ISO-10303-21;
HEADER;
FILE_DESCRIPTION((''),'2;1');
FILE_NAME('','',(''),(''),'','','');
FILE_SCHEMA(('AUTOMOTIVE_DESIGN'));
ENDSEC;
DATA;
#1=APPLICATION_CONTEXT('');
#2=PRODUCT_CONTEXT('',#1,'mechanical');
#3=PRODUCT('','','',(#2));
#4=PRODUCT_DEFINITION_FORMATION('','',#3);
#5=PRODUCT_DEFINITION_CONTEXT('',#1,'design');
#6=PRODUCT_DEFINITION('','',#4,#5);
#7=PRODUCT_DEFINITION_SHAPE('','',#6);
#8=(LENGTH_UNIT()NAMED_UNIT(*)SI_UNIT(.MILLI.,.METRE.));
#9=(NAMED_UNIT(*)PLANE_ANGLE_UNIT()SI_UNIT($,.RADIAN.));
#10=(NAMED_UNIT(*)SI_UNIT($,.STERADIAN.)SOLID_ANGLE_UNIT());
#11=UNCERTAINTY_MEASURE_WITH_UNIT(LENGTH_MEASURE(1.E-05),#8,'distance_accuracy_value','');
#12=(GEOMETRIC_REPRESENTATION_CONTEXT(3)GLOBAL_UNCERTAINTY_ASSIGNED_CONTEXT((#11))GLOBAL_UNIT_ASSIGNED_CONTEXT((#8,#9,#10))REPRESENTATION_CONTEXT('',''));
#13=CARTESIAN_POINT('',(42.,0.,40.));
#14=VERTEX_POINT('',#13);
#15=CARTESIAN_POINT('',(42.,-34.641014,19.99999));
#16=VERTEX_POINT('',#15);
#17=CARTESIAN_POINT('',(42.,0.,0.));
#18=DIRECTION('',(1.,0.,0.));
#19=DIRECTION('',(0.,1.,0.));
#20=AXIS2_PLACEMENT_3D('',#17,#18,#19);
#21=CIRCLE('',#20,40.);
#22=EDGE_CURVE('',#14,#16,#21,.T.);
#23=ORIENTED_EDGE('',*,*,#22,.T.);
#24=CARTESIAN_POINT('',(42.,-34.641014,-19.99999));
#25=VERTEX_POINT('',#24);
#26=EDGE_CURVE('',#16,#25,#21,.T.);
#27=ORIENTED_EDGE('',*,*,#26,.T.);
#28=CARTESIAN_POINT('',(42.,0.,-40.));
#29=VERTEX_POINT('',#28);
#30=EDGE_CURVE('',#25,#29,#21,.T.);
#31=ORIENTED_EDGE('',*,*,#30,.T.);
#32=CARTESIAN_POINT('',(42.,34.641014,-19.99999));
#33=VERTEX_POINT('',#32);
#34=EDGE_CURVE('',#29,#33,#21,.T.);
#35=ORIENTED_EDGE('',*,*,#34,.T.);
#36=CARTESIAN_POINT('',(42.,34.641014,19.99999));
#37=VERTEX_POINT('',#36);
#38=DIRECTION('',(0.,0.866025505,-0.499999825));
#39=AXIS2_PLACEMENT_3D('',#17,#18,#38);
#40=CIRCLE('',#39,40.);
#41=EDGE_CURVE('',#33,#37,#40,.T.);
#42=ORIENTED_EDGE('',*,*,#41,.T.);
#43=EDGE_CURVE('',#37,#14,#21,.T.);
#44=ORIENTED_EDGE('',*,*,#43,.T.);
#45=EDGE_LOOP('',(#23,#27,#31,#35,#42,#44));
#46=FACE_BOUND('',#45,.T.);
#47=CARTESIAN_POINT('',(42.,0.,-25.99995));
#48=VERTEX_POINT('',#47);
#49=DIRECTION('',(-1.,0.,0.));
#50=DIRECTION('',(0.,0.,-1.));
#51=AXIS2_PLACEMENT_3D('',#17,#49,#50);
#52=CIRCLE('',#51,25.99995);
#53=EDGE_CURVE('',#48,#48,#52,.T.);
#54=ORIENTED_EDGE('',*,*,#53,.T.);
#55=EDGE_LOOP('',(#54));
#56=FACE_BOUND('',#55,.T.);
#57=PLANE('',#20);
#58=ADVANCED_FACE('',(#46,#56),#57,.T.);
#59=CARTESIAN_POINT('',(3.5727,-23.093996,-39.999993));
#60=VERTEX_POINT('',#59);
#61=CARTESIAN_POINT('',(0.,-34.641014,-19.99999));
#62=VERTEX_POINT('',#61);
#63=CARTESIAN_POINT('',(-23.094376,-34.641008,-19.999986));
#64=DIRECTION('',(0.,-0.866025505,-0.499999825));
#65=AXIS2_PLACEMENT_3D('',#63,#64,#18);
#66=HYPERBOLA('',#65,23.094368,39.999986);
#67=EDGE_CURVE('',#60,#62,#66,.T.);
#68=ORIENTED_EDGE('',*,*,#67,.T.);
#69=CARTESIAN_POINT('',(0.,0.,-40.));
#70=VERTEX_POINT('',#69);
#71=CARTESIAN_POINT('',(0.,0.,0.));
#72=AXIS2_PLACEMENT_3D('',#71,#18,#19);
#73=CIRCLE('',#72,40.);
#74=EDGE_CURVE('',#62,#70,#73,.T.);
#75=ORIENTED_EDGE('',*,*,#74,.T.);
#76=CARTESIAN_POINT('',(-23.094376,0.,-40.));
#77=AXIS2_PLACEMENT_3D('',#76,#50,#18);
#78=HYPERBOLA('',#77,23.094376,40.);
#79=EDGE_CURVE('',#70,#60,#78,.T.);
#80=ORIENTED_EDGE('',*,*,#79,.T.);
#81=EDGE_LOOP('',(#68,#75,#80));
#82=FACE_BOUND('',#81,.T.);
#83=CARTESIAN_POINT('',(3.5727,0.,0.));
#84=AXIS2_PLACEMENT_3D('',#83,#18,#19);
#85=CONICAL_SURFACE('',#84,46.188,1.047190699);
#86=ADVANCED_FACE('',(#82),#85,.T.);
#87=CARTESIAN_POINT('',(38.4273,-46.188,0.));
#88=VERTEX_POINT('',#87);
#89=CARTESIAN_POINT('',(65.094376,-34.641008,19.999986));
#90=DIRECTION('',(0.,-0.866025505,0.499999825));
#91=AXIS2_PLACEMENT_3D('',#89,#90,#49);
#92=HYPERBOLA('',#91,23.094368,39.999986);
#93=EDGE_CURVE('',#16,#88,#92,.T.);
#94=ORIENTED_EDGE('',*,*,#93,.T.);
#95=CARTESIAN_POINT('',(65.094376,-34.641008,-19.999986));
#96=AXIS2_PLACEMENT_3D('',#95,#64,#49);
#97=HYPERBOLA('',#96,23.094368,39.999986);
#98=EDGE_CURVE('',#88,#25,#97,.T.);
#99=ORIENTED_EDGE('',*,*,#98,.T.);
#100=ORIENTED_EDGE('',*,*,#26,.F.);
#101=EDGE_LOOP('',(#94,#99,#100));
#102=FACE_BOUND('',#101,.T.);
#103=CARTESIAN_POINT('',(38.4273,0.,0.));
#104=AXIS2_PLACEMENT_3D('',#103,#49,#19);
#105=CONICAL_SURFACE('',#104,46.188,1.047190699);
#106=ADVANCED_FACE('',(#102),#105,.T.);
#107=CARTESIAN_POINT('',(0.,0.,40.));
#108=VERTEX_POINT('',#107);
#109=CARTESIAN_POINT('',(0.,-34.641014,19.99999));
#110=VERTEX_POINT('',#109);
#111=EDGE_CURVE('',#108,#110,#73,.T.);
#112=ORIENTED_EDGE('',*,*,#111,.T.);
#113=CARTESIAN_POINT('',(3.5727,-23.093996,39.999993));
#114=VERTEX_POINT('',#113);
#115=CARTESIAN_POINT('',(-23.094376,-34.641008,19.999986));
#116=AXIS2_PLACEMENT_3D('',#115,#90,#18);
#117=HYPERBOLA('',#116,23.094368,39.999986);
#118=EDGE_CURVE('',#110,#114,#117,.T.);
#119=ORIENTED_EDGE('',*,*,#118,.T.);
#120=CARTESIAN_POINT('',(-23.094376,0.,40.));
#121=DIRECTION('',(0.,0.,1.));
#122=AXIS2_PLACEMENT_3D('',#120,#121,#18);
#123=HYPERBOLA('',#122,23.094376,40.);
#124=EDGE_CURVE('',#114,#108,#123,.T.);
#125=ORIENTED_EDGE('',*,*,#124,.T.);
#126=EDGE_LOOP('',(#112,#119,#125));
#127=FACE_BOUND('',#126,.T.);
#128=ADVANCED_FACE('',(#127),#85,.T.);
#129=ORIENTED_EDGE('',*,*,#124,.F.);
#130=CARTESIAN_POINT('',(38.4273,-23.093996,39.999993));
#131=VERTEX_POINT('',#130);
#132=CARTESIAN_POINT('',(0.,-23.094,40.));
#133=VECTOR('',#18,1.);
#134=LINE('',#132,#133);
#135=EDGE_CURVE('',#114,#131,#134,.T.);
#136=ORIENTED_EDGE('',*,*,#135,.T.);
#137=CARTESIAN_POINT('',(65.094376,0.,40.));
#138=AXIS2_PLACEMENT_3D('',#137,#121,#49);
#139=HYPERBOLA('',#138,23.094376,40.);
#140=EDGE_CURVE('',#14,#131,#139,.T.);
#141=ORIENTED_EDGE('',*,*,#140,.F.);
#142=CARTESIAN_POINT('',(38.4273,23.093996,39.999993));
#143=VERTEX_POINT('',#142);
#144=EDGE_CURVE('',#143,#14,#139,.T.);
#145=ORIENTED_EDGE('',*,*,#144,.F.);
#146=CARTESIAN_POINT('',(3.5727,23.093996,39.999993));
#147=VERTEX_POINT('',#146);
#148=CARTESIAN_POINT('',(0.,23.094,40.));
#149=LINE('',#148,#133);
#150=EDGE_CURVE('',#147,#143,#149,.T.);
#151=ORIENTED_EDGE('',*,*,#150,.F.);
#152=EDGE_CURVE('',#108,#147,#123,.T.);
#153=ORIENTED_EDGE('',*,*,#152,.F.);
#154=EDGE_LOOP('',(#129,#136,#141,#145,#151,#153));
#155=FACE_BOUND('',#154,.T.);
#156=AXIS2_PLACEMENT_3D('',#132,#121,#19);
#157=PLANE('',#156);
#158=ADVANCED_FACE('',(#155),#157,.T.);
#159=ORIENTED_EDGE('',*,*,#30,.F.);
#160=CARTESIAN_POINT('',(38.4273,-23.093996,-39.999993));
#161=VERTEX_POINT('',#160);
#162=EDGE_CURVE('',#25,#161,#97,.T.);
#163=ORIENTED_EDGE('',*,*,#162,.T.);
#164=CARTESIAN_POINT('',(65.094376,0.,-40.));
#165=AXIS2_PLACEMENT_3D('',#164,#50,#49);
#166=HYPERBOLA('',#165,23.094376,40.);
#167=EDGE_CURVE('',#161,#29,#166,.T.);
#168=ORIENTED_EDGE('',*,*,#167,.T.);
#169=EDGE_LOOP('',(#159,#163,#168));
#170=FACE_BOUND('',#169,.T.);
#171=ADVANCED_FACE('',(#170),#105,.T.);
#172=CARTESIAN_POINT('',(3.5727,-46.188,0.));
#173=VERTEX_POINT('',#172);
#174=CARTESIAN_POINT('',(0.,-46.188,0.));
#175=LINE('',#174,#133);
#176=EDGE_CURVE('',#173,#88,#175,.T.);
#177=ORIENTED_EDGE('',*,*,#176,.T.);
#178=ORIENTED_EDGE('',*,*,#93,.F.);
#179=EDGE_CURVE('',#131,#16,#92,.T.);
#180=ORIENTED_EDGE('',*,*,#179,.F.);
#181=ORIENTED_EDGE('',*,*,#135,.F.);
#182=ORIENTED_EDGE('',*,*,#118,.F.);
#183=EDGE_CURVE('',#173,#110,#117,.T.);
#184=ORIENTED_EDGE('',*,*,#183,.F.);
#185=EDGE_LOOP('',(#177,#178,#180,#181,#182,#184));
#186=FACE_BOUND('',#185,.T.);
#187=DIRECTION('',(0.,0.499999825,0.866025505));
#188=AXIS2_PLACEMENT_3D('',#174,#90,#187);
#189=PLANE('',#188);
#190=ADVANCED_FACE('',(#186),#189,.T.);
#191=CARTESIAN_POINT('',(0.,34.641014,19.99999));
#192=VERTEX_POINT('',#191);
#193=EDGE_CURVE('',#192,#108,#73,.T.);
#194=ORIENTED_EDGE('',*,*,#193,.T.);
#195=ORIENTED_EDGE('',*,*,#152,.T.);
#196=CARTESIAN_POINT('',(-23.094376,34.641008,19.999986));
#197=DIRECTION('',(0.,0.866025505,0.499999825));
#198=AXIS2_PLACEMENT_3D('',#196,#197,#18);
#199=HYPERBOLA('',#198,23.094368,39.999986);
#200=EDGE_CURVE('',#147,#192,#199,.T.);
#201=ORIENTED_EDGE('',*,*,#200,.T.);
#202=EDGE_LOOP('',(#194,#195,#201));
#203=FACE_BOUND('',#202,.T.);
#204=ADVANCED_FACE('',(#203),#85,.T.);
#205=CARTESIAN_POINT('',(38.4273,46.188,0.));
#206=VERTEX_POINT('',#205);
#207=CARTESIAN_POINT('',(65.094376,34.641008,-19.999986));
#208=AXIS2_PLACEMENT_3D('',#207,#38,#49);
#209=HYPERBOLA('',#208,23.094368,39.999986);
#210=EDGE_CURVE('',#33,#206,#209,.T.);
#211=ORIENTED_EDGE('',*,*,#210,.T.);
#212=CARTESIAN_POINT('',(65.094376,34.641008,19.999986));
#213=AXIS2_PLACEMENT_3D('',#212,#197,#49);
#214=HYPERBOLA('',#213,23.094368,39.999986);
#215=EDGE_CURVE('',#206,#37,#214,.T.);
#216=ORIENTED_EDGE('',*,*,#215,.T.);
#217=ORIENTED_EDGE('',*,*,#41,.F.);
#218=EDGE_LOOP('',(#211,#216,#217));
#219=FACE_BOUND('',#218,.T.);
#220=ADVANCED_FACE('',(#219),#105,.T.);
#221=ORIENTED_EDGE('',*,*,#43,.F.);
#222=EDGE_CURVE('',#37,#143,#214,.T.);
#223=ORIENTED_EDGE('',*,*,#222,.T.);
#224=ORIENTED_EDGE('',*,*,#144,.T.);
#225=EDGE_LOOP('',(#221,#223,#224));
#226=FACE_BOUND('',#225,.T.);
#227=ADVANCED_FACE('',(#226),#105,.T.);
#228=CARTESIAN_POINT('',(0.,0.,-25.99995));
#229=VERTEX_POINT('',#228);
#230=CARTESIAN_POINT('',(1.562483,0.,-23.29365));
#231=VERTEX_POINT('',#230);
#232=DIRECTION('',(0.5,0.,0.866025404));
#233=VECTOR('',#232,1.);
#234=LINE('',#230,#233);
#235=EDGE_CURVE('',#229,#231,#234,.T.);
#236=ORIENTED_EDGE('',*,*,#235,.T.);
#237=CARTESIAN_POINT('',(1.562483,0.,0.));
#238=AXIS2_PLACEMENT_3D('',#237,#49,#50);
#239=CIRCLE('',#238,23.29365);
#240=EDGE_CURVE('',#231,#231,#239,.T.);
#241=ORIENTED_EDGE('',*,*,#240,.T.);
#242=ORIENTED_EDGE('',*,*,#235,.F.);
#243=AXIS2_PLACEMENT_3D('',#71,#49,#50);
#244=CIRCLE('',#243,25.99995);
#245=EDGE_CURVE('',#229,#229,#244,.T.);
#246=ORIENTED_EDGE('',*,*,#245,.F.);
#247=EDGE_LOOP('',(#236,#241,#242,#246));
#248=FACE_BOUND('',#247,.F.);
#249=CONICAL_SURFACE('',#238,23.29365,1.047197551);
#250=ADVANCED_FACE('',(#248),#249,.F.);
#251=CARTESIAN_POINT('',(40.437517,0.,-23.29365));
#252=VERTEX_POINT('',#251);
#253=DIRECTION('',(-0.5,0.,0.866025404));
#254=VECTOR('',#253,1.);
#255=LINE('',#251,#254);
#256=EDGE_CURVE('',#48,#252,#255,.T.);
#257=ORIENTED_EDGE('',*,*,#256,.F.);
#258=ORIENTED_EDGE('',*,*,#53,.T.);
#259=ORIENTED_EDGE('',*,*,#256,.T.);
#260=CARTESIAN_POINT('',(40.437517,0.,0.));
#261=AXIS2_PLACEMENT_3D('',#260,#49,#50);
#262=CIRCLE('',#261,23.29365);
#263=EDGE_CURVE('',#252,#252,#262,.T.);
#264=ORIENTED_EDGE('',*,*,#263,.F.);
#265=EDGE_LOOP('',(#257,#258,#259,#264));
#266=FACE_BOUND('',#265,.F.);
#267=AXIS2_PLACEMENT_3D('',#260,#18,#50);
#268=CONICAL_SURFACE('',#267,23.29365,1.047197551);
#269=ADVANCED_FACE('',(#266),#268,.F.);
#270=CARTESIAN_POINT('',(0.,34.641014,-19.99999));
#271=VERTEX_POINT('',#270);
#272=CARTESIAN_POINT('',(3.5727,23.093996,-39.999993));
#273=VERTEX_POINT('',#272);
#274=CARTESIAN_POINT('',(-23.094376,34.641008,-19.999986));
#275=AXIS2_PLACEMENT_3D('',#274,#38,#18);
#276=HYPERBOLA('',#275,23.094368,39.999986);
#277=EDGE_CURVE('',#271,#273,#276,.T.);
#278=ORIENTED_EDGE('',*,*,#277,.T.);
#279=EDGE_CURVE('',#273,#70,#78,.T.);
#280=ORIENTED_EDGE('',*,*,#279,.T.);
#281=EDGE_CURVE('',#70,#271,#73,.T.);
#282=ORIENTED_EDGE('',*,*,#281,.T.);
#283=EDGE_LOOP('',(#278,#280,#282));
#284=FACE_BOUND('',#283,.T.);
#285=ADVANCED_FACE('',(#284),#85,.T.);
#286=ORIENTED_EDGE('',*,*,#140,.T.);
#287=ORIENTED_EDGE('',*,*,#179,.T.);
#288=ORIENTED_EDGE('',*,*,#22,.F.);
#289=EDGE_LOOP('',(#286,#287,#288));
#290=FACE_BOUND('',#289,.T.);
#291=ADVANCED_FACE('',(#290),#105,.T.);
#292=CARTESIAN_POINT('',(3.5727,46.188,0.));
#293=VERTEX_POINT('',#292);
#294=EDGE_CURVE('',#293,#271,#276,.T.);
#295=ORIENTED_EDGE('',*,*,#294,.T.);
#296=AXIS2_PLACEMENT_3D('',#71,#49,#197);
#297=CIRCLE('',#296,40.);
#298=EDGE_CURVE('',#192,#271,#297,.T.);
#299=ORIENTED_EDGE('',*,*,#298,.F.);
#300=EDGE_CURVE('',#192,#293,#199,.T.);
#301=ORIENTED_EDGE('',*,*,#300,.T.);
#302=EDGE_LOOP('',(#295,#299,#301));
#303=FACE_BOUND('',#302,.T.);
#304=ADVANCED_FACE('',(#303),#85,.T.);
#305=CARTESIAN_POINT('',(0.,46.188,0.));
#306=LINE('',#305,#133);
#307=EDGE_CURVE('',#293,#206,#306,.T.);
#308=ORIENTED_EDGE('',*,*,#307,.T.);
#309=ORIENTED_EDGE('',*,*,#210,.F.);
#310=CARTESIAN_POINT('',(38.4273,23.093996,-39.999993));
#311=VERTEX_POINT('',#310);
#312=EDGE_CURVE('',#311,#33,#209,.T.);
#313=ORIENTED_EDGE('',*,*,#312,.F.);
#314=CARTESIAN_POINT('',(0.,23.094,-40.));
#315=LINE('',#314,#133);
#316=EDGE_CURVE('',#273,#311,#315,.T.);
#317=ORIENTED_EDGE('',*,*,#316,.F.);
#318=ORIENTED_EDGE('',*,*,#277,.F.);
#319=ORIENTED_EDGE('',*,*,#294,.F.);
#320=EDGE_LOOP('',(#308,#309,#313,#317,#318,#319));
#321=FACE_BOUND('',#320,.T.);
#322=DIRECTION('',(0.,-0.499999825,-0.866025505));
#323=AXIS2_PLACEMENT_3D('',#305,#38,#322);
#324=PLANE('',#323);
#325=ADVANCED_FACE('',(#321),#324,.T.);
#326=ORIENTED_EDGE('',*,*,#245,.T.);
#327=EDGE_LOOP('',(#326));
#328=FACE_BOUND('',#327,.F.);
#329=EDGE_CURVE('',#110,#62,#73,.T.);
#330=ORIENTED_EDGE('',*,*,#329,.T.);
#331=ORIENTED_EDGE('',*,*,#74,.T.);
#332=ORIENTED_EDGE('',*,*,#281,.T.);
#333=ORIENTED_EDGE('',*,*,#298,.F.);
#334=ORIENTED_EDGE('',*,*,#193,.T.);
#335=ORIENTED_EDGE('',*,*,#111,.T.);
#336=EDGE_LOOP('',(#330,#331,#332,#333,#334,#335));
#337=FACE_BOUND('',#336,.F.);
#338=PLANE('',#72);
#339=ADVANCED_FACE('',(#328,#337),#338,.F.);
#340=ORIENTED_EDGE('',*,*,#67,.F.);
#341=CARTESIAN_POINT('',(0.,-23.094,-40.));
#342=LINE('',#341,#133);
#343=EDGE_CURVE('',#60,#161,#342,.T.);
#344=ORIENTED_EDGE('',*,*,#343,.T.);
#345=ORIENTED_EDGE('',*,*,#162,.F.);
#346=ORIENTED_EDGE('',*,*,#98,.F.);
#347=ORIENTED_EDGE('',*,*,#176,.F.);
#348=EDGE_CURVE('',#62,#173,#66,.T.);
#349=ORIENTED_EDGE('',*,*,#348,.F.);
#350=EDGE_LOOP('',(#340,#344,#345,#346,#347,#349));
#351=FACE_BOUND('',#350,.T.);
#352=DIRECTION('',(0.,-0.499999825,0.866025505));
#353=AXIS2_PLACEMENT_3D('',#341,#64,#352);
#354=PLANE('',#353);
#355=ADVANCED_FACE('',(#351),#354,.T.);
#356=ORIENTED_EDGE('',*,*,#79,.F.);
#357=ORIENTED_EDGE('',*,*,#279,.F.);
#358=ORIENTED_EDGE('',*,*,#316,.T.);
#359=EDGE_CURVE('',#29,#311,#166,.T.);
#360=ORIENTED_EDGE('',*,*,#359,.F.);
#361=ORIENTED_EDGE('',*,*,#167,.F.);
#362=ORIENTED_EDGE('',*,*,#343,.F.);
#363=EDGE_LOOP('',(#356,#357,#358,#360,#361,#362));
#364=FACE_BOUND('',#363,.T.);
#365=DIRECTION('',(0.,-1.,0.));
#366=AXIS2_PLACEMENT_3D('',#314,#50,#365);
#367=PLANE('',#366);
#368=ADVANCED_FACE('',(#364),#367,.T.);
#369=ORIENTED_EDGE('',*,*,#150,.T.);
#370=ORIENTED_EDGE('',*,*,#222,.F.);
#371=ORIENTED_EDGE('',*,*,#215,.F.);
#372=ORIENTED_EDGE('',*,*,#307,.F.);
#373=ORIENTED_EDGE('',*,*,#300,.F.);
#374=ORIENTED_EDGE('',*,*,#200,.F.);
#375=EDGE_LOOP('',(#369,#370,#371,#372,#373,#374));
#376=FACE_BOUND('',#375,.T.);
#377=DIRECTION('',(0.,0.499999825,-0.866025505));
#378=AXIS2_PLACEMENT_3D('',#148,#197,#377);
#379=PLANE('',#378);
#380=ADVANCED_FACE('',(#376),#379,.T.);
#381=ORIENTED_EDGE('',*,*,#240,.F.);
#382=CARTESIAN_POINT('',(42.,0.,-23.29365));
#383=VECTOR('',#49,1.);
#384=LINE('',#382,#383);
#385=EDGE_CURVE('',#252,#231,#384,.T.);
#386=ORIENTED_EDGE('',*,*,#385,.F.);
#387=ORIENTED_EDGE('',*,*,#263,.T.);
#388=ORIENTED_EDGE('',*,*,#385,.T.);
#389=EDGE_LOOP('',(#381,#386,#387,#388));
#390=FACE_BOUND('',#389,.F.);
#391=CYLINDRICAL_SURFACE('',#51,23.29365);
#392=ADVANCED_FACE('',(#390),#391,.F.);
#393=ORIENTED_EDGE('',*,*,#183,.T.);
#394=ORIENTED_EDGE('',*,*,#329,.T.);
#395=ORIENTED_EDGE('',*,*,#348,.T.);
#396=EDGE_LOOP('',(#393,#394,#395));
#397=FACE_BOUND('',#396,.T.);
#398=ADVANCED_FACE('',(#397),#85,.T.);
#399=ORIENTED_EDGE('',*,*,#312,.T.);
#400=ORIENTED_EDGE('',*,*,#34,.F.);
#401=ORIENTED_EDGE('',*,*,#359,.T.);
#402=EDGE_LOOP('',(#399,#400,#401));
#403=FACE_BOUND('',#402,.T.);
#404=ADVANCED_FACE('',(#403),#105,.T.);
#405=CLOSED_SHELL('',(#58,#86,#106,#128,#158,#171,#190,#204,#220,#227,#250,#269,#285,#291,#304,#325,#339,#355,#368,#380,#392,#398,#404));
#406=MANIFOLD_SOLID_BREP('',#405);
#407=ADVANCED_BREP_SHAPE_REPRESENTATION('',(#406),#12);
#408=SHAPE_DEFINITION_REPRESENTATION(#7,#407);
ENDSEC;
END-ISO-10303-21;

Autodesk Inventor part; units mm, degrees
ref_plane "YZ Plane" through (0, 0, 0) normal (1, 0, 0) x (0, 1, 0)
ref_plane "XZ Plane" through (0, 0, 0) normal (0, 1, 0) x (-1, 0, 0)
sketch "Sketch1" plane through (0, 0, 0) normal (1, 0, 0) x (0, 1, 0)
  line L0 (-46.188, 0) -> (-23.094, 40)
  line L1 (-23.094, 40) -> (23.094, 40)
  line L2 (23.094, 40) -> (46.188, 0)
  line L3 (46.188, 0) -> (23.094, -40)
  line L4 (23.094, -40) -> (-23.094, -40)
  line L5 (-23.094, -40) -> (-46.188, 0)
  point P0 (0, 0)
  point P1 (0, 0)
  dimension "d0" = 92.376
extrude "Body" add sketch "Sketch1" along normal blind 42
sketch "Sketch2" plane through (0, 0, 0) normal (0, 0, 1) x (1, 0, 0)
  line L0 (0, 23.094) -> (0, 46.188) projected
  line L1 (0, 46.188) -> (42, 46.188) projected
  line L2 (42, 23.094) -> (42, 46.188) projected
  line L3 (-8.4, 0) -> (50.4, 0) projected
  line L4 (3.5727, 46.188) -> (0, 40)
  line L5 (38.4273, 46.188) -> (42, 40)
  dimension "d3" = 30
  dimension "d4" = 30
  dimension "d5" = 80
  dimension "d6" = 80
revolve "Chamfer1" cut sketch "Sketch2" angle 360 about axis through (-10, 0, 0) along (1, 0, 0)
sketch "Sketch3" plane through (42, 0, 0) normal (1, 0, 0) x (0, 0, -1)
  arc A0 (-20, -34.641) -> (20, -34.641) centre (0, 0) ccw projected
hole "Thread" at (42, 0, 0) direction (-1, 0, 0) diameter 46.5873 end through all thread size "M52x5" class "6H" standard "ISO Metric profile"
chamfer "Chamfer2" distance 2.7063 angle 30 1 edges at (42, 0, 23.2937) measured on face at (42, -34.2285, -0.9359)
chamfer "Chamfer3" distance 2.7063 angle 30 1 edges at (0, 0, 23.2937) measured on face at (0, -34.2285, -0.9359)
ref_plane "Work Plane1" through (-87.2182, 0, 0) normal (0, -0.8660254, -0.5) x (1, 0, 0)
equation "\"d0\" = 1.1547 * SW"
equation "\"d1\" = KOH"
equation "\"d8\" = -0.5 * GD1 + 0.5 * NND"
equation "\"d40\" = -0.5 * GD1 + 0.5 * NND"
equation "\"d10\" = -0.5 * GD1 + 0.5 * NND"
equation "\"d41\" = -0.5 * GD1 + 0.5 * NND"
equation "\"d3\" = ANG1"
equation "\"d4\" = ANG2"
equation "\"d5\" = SW0"
equation "\"d6\" = SW01"
equation "\"ANG1\" = 30deg"
equation "\"ANG2\" = ANG1"
equation "\"NND\" = 52"
equation "\"KOH\" = 42"
equation "\"SW0\" = SW"
equation "\"SW01\" = SW"
equation "\"GUL\" = 0.541266 * PTC"
equation "\"THREADDIA\" = 52"
equation "\"TOA\" = 30deg"
equation "\"PTC\" = 5"
equation "\"E0\" = 1.155 * SW"
equation "\"GAL\" = 0.541266 * PTC"
equation "\"SW\" = 80"
equation "\"GD1\" = 46.587341"
properties part number "BS 3692 - M52" material "Steel, Mild"
